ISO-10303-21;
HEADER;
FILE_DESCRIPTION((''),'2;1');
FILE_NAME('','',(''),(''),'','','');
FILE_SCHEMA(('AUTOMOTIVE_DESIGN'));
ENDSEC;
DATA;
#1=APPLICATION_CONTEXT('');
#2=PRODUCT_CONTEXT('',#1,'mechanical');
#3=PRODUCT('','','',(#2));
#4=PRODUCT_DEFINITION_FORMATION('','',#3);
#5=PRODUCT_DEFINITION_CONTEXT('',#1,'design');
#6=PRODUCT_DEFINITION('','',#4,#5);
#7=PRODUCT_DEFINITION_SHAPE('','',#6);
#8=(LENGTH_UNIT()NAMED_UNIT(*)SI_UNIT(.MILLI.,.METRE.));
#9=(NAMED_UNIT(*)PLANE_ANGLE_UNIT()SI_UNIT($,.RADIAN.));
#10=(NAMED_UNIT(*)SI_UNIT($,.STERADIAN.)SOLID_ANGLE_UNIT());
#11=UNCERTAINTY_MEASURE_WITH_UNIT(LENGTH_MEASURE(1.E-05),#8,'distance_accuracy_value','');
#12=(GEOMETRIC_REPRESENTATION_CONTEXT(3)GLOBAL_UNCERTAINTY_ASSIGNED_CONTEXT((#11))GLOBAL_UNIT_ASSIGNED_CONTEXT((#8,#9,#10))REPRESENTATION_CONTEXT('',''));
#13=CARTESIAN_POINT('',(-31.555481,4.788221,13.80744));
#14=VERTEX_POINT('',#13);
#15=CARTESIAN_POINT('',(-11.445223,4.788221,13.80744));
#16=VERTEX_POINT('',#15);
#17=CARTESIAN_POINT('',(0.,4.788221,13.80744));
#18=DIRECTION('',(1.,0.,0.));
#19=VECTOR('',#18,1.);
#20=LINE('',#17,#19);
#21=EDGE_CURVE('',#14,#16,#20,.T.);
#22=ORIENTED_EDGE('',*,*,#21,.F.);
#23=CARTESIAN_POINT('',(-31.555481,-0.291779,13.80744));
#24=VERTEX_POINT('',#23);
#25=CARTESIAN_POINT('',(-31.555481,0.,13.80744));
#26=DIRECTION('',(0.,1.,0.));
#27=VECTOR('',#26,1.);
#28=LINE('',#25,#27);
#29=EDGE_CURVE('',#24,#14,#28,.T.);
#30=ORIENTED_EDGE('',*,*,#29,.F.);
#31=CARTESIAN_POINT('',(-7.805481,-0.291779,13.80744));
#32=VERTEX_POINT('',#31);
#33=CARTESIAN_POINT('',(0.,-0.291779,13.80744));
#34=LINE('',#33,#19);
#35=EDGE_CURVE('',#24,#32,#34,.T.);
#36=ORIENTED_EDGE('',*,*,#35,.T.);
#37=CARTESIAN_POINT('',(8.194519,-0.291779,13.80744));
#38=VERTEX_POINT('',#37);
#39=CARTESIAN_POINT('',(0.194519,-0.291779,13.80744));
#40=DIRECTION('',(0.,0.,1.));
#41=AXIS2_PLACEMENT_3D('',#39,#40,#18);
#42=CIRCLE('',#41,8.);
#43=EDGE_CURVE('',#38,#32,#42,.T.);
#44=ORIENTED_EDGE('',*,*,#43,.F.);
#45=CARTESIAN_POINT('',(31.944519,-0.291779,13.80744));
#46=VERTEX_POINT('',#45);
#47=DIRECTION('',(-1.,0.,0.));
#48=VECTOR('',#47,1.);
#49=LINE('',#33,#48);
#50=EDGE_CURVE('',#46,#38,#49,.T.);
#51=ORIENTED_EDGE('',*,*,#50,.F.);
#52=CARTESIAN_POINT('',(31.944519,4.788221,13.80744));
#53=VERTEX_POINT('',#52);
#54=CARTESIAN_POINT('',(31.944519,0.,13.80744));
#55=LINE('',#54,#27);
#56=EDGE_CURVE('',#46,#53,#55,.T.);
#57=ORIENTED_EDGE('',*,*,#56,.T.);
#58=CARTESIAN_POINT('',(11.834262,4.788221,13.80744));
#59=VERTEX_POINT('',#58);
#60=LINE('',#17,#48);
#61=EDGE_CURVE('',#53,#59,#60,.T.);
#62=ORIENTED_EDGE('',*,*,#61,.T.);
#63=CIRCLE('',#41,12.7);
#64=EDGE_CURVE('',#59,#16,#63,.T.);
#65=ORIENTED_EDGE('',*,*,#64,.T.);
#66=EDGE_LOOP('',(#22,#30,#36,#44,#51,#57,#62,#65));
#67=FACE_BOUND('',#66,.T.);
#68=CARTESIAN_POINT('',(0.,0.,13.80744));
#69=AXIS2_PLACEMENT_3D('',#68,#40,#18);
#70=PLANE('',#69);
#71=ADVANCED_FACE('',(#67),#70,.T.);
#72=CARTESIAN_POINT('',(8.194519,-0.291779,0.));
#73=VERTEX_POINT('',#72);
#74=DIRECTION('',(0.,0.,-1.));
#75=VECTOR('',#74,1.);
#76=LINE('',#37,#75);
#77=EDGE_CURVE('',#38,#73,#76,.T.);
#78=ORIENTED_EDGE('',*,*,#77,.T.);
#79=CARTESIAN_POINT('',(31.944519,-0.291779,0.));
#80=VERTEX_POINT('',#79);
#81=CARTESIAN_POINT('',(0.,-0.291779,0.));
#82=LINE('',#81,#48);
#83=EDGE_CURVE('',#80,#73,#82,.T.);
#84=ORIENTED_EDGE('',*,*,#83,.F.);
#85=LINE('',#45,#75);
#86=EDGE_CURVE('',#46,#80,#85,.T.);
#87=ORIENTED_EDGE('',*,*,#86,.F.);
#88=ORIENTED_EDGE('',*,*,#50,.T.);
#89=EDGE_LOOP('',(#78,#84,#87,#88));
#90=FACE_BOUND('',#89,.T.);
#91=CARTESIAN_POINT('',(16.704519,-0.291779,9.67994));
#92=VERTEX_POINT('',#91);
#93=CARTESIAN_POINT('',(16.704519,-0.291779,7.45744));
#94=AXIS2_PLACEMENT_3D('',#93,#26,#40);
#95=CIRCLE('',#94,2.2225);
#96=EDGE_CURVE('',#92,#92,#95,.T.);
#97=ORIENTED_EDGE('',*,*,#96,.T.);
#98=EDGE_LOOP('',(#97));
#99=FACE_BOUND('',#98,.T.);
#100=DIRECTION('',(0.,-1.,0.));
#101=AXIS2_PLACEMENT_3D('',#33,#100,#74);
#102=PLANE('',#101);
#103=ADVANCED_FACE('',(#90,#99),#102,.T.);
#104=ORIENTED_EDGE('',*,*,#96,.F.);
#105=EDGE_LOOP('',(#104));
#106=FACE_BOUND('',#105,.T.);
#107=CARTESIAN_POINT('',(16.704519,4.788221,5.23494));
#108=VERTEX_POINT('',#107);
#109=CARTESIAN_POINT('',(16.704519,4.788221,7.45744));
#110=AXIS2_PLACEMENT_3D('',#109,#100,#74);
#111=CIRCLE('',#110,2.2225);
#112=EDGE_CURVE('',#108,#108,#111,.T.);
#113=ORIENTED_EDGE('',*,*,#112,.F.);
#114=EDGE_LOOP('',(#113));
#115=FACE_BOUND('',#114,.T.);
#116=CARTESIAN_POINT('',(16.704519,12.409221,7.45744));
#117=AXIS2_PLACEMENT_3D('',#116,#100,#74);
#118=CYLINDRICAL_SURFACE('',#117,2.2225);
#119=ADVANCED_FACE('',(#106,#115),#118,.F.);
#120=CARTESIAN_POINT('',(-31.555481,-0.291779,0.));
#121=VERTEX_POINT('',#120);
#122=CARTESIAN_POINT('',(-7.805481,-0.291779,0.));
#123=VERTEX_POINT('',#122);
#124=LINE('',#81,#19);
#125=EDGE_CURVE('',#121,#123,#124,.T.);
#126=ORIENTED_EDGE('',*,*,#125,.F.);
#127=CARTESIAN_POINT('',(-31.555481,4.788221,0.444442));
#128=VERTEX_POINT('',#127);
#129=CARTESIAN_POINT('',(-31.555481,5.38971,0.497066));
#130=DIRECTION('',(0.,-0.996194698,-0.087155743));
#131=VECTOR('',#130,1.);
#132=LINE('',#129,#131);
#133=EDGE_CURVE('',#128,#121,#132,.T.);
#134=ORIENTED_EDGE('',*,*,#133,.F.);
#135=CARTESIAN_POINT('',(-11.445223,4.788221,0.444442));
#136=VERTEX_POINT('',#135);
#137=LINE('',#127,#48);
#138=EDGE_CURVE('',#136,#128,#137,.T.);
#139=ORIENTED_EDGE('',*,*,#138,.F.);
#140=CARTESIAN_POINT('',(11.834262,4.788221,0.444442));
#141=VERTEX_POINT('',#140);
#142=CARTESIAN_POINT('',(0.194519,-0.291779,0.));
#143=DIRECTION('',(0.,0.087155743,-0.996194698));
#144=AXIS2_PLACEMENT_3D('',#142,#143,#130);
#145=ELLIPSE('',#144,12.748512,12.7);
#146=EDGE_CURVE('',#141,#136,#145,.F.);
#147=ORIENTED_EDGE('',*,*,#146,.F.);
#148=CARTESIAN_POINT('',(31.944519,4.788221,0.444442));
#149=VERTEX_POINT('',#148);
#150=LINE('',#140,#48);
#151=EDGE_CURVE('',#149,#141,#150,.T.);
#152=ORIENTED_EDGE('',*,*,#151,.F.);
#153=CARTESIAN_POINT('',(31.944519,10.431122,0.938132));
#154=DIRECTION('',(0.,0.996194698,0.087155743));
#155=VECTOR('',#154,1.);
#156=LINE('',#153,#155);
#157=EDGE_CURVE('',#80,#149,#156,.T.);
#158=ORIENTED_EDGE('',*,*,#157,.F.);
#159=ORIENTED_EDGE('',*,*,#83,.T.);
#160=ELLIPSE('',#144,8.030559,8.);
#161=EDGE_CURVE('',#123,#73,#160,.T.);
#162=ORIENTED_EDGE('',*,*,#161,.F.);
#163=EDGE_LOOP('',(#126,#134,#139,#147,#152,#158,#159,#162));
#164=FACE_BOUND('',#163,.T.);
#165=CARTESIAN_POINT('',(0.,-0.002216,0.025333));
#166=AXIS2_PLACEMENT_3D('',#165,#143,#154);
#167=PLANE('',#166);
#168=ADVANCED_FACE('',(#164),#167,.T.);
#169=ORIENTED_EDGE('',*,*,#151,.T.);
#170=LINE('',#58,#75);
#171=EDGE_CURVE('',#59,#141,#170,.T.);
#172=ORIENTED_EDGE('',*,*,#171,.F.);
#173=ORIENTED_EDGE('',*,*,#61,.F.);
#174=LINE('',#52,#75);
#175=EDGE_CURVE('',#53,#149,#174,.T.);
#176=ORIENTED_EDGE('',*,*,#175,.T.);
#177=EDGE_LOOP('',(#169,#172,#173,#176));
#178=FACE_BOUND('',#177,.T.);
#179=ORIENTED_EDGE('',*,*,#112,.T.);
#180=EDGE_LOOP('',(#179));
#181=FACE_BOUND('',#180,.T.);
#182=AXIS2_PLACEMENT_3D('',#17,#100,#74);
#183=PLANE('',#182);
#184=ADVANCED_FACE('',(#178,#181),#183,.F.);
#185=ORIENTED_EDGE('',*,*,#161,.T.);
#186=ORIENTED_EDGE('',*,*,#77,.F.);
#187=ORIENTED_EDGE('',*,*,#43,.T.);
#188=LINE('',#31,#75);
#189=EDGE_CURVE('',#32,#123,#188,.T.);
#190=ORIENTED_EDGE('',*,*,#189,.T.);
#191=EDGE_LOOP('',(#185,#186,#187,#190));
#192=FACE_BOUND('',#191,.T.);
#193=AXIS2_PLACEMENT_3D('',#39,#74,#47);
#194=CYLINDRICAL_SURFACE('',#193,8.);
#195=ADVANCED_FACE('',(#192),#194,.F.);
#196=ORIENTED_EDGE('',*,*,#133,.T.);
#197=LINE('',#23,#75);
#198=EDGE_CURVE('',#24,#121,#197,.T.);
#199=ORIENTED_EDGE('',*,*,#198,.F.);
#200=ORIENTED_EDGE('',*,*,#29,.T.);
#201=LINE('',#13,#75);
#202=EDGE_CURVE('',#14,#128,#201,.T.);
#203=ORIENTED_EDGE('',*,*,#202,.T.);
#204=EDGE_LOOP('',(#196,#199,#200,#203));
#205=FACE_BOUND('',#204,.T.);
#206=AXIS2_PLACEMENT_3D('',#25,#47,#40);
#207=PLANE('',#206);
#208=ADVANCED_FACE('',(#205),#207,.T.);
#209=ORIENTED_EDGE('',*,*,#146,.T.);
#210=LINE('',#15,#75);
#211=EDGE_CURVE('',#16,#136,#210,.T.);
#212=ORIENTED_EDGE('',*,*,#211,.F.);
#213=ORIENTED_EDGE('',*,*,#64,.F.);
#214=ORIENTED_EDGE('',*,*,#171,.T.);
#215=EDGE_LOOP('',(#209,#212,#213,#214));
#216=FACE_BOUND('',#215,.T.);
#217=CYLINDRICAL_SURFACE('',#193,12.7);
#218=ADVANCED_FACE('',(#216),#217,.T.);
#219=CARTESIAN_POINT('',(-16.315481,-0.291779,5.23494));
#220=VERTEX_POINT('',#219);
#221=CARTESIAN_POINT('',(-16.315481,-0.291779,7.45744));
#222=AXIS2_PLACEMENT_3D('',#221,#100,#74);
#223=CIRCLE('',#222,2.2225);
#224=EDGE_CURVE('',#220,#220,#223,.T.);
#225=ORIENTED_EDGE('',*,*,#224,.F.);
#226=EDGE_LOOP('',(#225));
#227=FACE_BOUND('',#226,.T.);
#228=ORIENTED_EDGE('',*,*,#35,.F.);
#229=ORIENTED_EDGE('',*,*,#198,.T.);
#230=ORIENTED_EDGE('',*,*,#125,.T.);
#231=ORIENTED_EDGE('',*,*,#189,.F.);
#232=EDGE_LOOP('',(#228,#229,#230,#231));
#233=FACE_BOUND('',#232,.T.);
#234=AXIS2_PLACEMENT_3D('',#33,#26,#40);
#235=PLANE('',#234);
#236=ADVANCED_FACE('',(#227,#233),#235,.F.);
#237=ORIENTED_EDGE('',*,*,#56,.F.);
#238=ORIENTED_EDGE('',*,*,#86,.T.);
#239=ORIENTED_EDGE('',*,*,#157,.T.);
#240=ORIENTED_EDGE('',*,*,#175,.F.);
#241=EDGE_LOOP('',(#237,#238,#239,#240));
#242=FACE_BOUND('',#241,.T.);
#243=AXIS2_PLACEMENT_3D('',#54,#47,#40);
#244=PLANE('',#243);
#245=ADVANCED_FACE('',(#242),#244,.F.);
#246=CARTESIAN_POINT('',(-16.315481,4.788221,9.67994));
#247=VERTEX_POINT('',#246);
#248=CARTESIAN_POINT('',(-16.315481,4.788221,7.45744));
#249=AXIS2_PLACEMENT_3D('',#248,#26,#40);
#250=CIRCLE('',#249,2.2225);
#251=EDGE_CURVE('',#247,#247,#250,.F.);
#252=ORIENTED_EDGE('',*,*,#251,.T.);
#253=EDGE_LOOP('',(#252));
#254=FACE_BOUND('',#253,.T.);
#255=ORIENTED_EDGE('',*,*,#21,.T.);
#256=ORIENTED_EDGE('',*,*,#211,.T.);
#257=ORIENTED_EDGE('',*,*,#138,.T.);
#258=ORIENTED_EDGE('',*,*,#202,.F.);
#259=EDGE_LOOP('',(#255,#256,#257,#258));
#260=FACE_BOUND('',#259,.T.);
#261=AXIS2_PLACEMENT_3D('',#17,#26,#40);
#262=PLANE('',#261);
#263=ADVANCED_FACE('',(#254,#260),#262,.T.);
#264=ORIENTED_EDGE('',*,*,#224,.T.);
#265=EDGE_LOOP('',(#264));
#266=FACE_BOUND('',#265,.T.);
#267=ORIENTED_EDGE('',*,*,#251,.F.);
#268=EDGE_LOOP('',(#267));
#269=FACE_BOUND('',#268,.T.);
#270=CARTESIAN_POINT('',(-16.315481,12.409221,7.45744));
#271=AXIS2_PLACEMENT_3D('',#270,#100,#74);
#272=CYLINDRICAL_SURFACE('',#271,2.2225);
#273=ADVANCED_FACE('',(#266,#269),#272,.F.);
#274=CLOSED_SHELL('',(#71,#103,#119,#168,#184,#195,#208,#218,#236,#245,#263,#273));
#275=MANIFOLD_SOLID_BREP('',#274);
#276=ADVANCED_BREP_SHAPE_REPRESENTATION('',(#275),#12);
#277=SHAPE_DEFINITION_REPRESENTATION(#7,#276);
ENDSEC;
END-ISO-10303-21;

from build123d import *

# Parameters (mm, degrees)
BOSS_EXTRUDE2_DEPTH    = 13.80744
CUT_EXTRUDE1_START     = -0.02543021
CUT_EXTRUDE1_OUTLINE_W = 66
CUT_EXTRUDE1_OUTLINE_H = 16
CUT_EXTRUDE1_DEPTH     = 1.106877933
CUT_EXTRUDE2_REACH     = 39.046
SKETCH4_R              = 2.2225


# Read off the part's stored shape, not the designer's step: Cut-Extrude1
with BuildPart() as part:
    # Sketch2 → Boss-Extrude2 (new body)
    with BuildSketch(Plane.XY):
        with BuildLine():
            ThreePointArc((-11.445222977, 4.788221067), (-12.237590886, 2.302953542), (-12.505480711, -0.291778933))
            Line((-12.505480711, -0.291778933), (-7.805480711, -0.291778933))
            ThreePointArc((-7.805480711, -0.291778933), (0.194519289, 7.708221067), (8.194519289, -0.291778933))
            Line((8.194519289, -0.291778933), (12.894519289, -0.291778933))
            ThreePointArc((12.894519289, -0.291778933), (12.626629463, 2.302953542), (11.834261554, 4.788221067))
            ThreePointArc((11.834261554, 4.788221067), (0.194519289, 12.408221067), (-11.445222977, 4.788221067))
        make_face()
        with BuildLine():
            Line((-31.555480711, -0.291778933), (-12.505480711, -0.291778933))
            ThreePointArc((-12.505480711, -0.291778933), (-12.237590886, 2.302953542), (-11.445222977, 4.788221067))
            Line((-11.445222977, 4.788221067), (-31.555480711, 4.788221067))
            Line((-31.555480711, 4.788221067), (-31.555480711, -0.291778933))
        make_face()
        with BuildLine():
            ThreePointArc((11.834261554, 4.788221067), (12.626629463, 2.302953542), (12.894519289, -0.291778933))
            Line((12.894519289, -0.291778933), (31.944519289, -0.291778933))
            Line((31.944519289, -0.291778933), (31.944519289, 4.788221067))
            Line((31.944519289, 4.788221067), (11.834261554, 4.788221067))
        make_face()
    extrude(amount=BOSS_EXTRUDE2_DEPTH)

    # Cut-Extrude1 outline → Cut-Extrude1 (cut)
    with BuildSketch(Plane(origin=(0, 0, 0), x_dir=(1, 0, 0), z_dir=(0, 0.08715574274765836, -0.9961946980917455)).offset(CUT_EXTRUDE1_START)):
        with Locations((0, -6)):
            Rectangle(CUT_EXTRUDE1_OUTLINE_W, CUT_EXTRUDE1_OUTLINE_H)
    extrude(amount=CUT_EXTRUDE1_DEPTH, mode=Mode.SUBTRACT)

    # Sketch4 → Cut-Extrude2 (cut, up to next)
    with BuildSketch(Plane.XZ.offset(0.291778933), mode=Mode.PRIVATE) as cut_extrude2_sk1:
        with Locations(Location((-16.315480711, 7.45744, 0), (0, 0, 270))):
            Circle(SKETCH4_R)
    cut_extrude2_tool1 = extrude(cut_extrude2_sk1.sketch, amount=-CUT_EXTRUDE2_REACH, mode=Mode.PRIVATE) & part.part
    # Sketch4 → Cut-Extrude2 (cut, up to next)
    with BuildSketch(Plane.XZ.offset(0.291778933), mode=Mode.PRIVATE) as cut_extrude2_sk2:
        with Locations(Location((16.704519289, 7.45744, 0), (0, 0, 270))):
            Circle(SKETCH4_R)
    cut_extrude2_tool2 = extrude(cut_extrude2_sk2.sketch, amount=-CUT_EXTRUDE2_REACH, mode=Mode.PRIVATE) & part.part
    add(cut_extrude2_tool1.solids().sort_by_distance((-16.315481, -0.291779, 7.45744))[0], mode=Mode.SUBTRACT)
    add(cut_extrude2_tool2.solids().sort_by_distance((16.704519, -0.291779, 7.45744))[0], mode=Mode.SUBTRACT)


solid = part.part
